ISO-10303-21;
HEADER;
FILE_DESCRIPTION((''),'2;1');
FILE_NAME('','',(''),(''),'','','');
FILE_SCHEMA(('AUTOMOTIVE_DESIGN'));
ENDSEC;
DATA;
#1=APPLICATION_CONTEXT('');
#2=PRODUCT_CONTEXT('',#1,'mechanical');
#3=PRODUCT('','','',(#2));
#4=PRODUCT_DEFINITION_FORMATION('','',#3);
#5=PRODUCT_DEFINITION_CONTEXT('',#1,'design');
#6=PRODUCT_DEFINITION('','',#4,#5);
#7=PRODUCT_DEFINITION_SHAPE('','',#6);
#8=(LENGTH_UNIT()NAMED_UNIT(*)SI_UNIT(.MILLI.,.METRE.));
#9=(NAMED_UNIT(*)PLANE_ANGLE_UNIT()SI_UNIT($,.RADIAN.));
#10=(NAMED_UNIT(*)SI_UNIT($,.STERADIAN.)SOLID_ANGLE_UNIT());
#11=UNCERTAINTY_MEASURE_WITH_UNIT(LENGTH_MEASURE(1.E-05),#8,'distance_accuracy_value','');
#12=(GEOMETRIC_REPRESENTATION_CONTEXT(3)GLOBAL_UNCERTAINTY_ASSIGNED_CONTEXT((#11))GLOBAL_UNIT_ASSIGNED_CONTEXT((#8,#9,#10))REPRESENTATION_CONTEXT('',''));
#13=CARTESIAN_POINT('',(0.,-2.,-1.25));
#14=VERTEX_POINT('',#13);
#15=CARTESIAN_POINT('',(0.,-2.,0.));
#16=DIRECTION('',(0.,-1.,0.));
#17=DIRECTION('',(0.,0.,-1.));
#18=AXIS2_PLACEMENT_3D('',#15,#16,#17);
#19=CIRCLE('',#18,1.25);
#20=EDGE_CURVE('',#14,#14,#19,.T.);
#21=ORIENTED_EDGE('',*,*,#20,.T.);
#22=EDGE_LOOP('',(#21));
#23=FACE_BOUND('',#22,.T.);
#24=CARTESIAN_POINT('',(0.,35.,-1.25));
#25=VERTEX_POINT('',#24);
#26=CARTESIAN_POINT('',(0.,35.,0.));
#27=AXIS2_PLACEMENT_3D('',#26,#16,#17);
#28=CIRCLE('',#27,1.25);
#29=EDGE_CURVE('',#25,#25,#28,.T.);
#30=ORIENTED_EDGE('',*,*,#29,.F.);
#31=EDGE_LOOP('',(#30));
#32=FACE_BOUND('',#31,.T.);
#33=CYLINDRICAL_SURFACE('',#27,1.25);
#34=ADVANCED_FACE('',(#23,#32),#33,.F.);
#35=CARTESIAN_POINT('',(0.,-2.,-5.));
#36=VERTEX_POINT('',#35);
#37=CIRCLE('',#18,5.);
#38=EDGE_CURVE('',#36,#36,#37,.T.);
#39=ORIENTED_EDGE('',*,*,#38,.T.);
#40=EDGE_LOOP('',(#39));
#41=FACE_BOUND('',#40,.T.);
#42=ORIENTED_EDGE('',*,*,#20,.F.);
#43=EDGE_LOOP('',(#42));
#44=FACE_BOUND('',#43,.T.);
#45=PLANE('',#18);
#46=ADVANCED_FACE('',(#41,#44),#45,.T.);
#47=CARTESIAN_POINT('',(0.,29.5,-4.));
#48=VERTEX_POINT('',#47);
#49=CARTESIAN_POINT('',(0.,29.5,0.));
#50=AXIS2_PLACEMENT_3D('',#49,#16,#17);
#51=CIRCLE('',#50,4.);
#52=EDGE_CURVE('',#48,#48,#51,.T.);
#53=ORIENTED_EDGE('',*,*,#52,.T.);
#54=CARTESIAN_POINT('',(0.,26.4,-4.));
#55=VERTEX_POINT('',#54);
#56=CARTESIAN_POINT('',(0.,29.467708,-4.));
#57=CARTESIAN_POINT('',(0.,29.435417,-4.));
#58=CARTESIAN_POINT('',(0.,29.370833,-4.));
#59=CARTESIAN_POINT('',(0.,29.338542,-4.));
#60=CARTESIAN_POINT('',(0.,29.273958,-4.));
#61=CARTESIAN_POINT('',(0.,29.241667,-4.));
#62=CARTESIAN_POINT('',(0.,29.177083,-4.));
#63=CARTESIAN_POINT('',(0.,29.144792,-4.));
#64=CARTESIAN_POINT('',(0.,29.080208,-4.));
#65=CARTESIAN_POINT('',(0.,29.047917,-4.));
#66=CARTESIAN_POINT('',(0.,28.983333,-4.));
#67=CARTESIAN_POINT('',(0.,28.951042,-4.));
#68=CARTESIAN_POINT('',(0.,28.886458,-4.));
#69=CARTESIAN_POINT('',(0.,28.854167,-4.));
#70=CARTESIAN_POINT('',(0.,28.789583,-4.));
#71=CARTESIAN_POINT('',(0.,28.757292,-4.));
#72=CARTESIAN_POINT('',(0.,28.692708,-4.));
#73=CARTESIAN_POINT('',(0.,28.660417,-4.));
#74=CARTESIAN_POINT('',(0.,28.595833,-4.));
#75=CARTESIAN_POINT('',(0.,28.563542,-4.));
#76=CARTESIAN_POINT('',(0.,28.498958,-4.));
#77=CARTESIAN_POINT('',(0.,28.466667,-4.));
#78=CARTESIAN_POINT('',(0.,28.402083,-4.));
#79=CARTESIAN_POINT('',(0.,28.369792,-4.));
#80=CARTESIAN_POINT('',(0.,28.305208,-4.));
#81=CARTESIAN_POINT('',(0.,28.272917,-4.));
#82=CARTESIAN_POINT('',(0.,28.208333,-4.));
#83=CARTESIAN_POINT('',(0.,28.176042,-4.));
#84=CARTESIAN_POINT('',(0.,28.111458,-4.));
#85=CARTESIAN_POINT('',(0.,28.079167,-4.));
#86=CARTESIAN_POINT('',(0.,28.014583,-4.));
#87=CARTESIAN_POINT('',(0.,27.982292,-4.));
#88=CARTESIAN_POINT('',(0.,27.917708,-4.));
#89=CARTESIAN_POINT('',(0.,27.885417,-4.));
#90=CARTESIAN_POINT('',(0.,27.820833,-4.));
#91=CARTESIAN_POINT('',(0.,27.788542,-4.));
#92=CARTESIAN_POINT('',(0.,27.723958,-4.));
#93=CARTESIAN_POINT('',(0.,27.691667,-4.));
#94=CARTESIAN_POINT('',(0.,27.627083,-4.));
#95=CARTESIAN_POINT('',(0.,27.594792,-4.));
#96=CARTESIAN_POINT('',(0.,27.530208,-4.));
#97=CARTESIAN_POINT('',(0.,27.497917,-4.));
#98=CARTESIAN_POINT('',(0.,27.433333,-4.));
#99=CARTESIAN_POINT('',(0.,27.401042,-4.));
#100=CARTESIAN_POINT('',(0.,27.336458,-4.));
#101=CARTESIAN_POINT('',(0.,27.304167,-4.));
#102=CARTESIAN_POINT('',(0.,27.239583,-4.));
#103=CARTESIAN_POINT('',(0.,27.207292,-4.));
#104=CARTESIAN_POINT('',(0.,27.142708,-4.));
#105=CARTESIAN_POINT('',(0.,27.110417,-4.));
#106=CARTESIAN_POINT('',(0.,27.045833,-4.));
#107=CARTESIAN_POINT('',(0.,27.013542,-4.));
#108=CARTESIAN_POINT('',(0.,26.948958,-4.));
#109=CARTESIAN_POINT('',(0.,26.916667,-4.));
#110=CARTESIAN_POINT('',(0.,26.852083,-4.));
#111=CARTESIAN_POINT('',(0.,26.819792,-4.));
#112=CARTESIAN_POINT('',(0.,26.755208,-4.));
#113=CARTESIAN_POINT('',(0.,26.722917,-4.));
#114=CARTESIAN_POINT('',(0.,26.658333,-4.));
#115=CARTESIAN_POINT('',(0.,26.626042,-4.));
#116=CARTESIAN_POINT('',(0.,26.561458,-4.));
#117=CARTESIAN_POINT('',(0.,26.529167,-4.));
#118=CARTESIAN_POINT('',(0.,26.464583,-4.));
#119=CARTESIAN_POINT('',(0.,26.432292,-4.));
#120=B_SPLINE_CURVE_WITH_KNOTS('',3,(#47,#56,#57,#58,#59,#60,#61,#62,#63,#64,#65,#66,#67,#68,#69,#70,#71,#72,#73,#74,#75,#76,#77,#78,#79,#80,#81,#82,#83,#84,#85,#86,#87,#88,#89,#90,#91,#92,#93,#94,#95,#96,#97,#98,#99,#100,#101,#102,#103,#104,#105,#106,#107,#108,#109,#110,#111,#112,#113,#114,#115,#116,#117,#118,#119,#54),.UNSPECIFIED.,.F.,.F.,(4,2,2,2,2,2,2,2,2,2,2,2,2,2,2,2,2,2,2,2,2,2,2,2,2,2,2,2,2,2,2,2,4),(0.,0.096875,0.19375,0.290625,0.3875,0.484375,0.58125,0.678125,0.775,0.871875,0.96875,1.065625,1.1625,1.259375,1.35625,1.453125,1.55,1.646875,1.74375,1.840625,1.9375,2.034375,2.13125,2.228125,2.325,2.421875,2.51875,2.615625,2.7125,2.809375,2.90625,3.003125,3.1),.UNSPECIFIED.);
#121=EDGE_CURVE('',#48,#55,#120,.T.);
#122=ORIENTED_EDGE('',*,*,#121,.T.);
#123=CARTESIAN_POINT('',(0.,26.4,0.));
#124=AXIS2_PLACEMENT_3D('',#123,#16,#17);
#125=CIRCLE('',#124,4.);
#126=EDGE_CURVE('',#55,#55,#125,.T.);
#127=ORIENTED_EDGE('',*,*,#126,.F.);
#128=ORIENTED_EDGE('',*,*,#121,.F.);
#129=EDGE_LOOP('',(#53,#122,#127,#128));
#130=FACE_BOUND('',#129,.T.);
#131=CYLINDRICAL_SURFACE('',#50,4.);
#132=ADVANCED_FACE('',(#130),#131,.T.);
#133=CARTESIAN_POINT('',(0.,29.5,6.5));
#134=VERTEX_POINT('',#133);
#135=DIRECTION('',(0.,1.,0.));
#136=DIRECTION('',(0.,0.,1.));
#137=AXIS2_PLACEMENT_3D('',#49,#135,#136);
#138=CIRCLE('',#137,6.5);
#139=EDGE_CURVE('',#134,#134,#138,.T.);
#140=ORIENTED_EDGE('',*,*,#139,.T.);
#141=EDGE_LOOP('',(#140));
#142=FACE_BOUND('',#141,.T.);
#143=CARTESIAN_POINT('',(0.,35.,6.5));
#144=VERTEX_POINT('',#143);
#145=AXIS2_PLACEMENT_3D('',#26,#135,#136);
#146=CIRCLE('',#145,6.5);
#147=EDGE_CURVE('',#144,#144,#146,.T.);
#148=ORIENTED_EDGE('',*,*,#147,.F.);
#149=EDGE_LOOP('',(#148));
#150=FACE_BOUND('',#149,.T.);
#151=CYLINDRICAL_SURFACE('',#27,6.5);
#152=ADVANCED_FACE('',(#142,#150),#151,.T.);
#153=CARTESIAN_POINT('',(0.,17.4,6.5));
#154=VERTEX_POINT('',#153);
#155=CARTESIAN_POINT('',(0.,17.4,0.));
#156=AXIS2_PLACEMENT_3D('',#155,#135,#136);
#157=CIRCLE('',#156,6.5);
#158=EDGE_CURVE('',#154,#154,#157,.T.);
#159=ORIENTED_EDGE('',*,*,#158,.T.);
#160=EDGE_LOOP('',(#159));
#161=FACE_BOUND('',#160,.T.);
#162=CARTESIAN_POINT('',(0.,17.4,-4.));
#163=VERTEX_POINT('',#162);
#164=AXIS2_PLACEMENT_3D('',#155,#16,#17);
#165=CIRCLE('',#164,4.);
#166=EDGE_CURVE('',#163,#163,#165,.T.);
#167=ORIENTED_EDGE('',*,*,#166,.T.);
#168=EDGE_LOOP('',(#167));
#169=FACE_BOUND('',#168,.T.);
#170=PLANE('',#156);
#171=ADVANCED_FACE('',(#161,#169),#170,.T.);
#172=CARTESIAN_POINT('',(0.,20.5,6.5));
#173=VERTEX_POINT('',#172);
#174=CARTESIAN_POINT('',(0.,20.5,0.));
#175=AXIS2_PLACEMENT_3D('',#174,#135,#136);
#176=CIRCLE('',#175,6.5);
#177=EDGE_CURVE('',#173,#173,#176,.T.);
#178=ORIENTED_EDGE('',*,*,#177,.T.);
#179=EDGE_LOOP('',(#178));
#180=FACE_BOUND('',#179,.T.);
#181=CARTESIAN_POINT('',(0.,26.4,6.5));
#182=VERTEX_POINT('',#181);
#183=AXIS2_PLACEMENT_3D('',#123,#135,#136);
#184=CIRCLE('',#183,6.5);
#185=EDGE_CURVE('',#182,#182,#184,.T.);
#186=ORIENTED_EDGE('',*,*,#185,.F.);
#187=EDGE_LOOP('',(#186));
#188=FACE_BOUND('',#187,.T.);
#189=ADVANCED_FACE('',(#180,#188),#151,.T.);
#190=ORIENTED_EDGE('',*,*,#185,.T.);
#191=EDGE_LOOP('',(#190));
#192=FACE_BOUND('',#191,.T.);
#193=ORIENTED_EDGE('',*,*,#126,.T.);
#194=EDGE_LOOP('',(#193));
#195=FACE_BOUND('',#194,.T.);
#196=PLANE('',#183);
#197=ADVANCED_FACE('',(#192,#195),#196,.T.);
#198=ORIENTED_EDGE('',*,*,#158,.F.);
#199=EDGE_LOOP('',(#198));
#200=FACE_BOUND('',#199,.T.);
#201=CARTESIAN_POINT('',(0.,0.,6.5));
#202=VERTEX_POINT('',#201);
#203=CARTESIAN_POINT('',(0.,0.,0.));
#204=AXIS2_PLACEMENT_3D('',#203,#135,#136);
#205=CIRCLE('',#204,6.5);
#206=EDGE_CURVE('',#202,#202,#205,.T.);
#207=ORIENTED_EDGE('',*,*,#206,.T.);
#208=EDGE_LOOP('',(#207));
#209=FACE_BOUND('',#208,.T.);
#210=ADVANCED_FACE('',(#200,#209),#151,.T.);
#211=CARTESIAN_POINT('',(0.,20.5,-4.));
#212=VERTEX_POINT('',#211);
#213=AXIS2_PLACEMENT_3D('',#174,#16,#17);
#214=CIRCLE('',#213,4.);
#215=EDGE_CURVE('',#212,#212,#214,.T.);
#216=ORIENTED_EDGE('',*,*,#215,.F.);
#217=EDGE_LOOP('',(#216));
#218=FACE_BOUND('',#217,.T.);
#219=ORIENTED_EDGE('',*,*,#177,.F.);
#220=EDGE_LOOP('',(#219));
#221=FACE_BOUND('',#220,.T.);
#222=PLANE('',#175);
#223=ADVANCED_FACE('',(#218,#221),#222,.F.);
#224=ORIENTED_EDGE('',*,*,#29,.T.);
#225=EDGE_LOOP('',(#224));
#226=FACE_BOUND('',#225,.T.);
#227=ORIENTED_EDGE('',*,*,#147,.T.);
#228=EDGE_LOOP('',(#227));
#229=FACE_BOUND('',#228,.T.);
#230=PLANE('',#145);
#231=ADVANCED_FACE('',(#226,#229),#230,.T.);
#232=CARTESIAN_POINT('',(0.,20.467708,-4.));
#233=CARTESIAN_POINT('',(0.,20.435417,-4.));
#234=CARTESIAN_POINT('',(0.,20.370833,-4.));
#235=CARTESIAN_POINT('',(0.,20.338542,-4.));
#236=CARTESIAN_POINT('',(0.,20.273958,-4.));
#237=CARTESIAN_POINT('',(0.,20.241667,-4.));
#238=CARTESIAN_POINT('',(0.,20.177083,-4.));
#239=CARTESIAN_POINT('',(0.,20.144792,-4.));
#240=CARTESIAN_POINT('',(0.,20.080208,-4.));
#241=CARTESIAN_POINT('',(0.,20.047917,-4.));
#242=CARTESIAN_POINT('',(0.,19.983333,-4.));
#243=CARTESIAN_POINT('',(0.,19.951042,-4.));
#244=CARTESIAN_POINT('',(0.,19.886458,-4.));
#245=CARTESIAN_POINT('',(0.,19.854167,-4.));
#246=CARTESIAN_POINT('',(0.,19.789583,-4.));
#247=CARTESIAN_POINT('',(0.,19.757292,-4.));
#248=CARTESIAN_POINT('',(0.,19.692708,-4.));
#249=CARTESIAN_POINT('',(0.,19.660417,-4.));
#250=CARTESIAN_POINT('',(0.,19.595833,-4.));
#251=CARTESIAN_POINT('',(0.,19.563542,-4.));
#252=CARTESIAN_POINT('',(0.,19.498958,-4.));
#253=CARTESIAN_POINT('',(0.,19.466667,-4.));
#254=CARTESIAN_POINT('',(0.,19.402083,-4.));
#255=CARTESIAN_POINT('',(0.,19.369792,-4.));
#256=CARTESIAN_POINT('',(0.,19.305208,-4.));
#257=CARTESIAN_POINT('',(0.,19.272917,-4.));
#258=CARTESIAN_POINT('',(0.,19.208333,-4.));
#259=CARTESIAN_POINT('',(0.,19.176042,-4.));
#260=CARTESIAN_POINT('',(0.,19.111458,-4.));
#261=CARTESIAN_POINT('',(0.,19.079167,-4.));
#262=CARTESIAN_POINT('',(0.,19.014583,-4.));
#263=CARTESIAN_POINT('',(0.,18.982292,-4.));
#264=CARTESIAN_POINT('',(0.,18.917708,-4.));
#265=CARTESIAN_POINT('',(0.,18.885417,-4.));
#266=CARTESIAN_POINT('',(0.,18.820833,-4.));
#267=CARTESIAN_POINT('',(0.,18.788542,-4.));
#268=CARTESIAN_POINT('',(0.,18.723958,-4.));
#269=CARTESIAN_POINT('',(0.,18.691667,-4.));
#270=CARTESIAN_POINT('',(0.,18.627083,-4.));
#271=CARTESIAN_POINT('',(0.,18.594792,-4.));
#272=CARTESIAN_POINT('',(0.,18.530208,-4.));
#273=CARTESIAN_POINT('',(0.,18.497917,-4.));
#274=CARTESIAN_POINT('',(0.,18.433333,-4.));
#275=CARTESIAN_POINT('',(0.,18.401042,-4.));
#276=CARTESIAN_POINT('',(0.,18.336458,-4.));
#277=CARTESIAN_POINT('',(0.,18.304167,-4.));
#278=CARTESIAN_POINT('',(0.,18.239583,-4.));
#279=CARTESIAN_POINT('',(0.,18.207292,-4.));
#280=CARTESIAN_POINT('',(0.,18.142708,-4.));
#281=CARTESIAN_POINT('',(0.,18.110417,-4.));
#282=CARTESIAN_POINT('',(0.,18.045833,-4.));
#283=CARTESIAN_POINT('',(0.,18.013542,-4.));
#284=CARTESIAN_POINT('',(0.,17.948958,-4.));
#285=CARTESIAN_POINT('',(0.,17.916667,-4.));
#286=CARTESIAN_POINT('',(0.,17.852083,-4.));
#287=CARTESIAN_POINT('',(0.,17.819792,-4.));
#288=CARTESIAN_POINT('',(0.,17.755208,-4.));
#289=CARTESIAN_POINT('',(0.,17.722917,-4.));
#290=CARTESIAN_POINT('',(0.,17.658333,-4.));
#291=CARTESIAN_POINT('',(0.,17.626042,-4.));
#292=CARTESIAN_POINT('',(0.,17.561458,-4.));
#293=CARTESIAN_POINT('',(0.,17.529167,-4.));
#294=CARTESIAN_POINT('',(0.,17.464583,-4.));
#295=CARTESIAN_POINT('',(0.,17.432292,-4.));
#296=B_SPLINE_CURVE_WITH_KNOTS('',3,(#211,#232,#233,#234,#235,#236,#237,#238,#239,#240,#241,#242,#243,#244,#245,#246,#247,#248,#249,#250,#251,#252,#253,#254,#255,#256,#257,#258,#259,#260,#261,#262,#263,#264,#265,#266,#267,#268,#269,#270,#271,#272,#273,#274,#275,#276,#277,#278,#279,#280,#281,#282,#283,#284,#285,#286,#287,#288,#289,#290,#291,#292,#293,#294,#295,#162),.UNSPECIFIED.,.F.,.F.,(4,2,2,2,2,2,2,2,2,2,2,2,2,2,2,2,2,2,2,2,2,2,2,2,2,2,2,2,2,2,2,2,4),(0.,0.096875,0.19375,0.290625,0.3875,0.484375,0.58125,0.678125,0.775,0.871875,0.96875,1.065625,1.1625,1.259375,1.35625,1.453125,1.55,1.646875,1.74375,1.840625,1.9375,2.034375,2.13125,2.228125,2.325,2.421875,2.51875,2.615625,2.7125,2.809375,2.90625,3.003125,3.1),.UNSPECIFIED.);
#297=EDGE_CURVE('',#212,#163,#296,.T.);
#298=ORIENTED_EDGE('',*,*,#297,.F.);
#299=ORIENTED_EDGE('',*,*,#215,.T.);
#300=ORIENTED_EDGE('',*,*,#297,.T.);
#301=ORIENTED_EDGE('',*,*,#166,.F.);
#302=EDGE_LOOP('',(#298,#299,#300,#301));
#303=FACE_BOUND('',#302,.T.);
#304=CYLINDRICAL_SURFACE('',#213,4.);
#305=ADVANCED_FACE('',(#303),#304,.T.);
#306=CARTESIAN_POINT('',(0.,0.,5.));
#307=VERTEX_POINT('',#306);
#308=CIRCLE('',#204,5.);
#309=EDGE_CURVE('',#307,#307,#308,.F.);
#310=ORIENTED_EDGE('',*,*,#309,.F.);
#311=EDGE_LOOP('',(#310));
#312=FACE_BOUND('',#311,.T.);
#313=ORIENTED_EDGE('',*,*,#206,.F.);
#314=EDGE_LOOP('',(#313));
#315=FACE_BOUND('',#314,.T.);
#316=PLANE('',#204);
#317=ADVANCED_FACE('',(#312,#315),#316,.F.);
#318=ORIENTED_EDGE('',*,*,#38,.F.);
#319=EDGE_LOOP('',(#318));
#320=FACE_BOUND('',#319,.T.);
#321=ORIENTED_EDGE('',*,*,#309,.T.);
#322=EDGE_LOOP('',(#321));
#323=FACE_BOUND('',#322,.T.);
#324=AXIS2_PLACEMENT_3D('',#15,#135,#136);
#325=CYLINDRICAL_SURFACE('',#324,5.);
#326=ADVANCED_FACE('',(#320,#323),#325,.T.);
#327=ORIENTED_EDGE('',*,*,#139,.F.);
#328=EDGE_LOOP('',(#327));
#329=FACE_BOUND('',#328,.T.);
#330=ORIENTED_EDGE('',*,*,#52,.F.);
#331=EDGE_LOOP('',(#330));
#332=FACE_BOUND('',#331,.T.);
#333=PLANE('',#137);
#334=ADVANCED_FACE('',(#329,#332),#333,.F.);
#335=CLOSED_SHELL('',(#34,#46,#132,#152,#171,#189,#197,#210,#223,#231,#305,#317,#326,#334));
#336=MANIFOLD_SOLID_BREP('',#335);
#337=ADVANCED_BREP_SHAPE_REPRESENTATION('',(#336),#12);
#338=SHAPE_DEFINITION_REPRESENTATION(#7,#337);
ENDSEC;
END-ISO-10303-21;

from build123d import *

# Parameters (mm, degrees)
SCHIZZO1_R                     = 6.5
ESTRUSIONE_ESTRUSIONE1_DEPTH   = 35
SCHIZZO6_R                     = 1.25
TAGLIO_ESTRUSIONE4_DEPTH       = 37.187014245
TAGLIO_ESTRUSIONE5_START       = 17.4
TAGLIO_ESTRUSIONE5_OUTLINE_R   = 6.5
TAGLIO_ESTRUSIONE5_OUTLINE_R_2 = 4
TAGLIO_ESTRUSIONE5_DEPTH       = 3.1
RIPETIZIONE_A_L1_COUNT         = 2
RIPETIZIONE_A_L1_PITCH         = 9
SCHIZZO8_R                     = 5
ESTRUSIONE_ESTRUSIONE2_DEPTH   = 2
SCHIZZO9_R                     = 1.25
TAGLIO_ESTRUSIONE6_DEPTH       = 39.124795081


# Read off the part's stored shape, not the designer's step: Taglio-Estrusione5
with BuildPart() as part:
    # Schizzo1 → Estrusione-Estrusione1 (new body)
    with BuildSketch(Plane(origin=(0, 0, 0), x_dir=(1, 0, 0), z_dir=(0, 1, 0))):
        with Locations(Location((0, 0, 0), (0, 0, 270))):
            Circle(SCHIZZO1_R)
    extrude(amount=ESTRUSIONE_ESTRUSIONE1_DEPTH)

    # Schizzo6 → Taglio-Estrusione4 (cut, through all)
    with BuildSketch(Plane.XZ):
        with Locations(Location((0, 0, 0), (0, 0, 270))):
            Circle(SCHIZZO6_R)
    extrude(amount=-TAGLIO_ESTRUSIONE4_DEPTH, mode=Mode.SUBTRACT)

    # Taglio-Estrusione5 outline → Taglio-Estrusione5 (cut)
    with BuildSketch(Plane(origin=(0, 0, 0), x_dir=(1, 0, 0), z_dir=(0, 1, 0)).offset(TAGLIO_ESTRUSIONE5_START)):
        Circle(TAGLIO_ESTRUSIONE5_OUTLINE_R)
        Circle(TAGLIO_ESTRUSIONE5_OUTLINE_R_2, mode=Mode.SUBTRACT)
    taglio_estrusione5 = extrude(amount=TAGLIO_ESTRUSIONE5_DEPTH, mode=Mode.SUBTRACT)

    # Ripetizione a L1: Taglio-Estrusione5 ×2
    with Locations(*[(0, i * RIPETIZIONE_A_L1_PITCH, 0) for i in range(1, RIPETIZIONE_A_L1_COUNT)]):
        add(taglio_estrusione5, mode=Mode.SUBTRACT)

    # Schizzo8 → Estrusione-Estrusione2 (add)
    with BuildSketch(Plane.XZ):
        with Locations(Location((0, 0, 0), (0, 0, 90))):
            Circle(SCHIZZO8_R)
    extrude(amount=ESTRUSIONE_ESTRUSIONE2_DEPTH)

    # Schizzo9 → Taglio-Estrusione6 (cut, through all)
    with BuildSketch(Plane.XZ.offset(2)):
        with Locations(Location((0, 0, 0), (0, 0, 270))):
            Circle(SCHIZZO9_R)
    extrude(amount=-TAGLIO_ESTRUSIONE6_DEPTH, mode=Mode.SUBTRACT)


solid = part.part
